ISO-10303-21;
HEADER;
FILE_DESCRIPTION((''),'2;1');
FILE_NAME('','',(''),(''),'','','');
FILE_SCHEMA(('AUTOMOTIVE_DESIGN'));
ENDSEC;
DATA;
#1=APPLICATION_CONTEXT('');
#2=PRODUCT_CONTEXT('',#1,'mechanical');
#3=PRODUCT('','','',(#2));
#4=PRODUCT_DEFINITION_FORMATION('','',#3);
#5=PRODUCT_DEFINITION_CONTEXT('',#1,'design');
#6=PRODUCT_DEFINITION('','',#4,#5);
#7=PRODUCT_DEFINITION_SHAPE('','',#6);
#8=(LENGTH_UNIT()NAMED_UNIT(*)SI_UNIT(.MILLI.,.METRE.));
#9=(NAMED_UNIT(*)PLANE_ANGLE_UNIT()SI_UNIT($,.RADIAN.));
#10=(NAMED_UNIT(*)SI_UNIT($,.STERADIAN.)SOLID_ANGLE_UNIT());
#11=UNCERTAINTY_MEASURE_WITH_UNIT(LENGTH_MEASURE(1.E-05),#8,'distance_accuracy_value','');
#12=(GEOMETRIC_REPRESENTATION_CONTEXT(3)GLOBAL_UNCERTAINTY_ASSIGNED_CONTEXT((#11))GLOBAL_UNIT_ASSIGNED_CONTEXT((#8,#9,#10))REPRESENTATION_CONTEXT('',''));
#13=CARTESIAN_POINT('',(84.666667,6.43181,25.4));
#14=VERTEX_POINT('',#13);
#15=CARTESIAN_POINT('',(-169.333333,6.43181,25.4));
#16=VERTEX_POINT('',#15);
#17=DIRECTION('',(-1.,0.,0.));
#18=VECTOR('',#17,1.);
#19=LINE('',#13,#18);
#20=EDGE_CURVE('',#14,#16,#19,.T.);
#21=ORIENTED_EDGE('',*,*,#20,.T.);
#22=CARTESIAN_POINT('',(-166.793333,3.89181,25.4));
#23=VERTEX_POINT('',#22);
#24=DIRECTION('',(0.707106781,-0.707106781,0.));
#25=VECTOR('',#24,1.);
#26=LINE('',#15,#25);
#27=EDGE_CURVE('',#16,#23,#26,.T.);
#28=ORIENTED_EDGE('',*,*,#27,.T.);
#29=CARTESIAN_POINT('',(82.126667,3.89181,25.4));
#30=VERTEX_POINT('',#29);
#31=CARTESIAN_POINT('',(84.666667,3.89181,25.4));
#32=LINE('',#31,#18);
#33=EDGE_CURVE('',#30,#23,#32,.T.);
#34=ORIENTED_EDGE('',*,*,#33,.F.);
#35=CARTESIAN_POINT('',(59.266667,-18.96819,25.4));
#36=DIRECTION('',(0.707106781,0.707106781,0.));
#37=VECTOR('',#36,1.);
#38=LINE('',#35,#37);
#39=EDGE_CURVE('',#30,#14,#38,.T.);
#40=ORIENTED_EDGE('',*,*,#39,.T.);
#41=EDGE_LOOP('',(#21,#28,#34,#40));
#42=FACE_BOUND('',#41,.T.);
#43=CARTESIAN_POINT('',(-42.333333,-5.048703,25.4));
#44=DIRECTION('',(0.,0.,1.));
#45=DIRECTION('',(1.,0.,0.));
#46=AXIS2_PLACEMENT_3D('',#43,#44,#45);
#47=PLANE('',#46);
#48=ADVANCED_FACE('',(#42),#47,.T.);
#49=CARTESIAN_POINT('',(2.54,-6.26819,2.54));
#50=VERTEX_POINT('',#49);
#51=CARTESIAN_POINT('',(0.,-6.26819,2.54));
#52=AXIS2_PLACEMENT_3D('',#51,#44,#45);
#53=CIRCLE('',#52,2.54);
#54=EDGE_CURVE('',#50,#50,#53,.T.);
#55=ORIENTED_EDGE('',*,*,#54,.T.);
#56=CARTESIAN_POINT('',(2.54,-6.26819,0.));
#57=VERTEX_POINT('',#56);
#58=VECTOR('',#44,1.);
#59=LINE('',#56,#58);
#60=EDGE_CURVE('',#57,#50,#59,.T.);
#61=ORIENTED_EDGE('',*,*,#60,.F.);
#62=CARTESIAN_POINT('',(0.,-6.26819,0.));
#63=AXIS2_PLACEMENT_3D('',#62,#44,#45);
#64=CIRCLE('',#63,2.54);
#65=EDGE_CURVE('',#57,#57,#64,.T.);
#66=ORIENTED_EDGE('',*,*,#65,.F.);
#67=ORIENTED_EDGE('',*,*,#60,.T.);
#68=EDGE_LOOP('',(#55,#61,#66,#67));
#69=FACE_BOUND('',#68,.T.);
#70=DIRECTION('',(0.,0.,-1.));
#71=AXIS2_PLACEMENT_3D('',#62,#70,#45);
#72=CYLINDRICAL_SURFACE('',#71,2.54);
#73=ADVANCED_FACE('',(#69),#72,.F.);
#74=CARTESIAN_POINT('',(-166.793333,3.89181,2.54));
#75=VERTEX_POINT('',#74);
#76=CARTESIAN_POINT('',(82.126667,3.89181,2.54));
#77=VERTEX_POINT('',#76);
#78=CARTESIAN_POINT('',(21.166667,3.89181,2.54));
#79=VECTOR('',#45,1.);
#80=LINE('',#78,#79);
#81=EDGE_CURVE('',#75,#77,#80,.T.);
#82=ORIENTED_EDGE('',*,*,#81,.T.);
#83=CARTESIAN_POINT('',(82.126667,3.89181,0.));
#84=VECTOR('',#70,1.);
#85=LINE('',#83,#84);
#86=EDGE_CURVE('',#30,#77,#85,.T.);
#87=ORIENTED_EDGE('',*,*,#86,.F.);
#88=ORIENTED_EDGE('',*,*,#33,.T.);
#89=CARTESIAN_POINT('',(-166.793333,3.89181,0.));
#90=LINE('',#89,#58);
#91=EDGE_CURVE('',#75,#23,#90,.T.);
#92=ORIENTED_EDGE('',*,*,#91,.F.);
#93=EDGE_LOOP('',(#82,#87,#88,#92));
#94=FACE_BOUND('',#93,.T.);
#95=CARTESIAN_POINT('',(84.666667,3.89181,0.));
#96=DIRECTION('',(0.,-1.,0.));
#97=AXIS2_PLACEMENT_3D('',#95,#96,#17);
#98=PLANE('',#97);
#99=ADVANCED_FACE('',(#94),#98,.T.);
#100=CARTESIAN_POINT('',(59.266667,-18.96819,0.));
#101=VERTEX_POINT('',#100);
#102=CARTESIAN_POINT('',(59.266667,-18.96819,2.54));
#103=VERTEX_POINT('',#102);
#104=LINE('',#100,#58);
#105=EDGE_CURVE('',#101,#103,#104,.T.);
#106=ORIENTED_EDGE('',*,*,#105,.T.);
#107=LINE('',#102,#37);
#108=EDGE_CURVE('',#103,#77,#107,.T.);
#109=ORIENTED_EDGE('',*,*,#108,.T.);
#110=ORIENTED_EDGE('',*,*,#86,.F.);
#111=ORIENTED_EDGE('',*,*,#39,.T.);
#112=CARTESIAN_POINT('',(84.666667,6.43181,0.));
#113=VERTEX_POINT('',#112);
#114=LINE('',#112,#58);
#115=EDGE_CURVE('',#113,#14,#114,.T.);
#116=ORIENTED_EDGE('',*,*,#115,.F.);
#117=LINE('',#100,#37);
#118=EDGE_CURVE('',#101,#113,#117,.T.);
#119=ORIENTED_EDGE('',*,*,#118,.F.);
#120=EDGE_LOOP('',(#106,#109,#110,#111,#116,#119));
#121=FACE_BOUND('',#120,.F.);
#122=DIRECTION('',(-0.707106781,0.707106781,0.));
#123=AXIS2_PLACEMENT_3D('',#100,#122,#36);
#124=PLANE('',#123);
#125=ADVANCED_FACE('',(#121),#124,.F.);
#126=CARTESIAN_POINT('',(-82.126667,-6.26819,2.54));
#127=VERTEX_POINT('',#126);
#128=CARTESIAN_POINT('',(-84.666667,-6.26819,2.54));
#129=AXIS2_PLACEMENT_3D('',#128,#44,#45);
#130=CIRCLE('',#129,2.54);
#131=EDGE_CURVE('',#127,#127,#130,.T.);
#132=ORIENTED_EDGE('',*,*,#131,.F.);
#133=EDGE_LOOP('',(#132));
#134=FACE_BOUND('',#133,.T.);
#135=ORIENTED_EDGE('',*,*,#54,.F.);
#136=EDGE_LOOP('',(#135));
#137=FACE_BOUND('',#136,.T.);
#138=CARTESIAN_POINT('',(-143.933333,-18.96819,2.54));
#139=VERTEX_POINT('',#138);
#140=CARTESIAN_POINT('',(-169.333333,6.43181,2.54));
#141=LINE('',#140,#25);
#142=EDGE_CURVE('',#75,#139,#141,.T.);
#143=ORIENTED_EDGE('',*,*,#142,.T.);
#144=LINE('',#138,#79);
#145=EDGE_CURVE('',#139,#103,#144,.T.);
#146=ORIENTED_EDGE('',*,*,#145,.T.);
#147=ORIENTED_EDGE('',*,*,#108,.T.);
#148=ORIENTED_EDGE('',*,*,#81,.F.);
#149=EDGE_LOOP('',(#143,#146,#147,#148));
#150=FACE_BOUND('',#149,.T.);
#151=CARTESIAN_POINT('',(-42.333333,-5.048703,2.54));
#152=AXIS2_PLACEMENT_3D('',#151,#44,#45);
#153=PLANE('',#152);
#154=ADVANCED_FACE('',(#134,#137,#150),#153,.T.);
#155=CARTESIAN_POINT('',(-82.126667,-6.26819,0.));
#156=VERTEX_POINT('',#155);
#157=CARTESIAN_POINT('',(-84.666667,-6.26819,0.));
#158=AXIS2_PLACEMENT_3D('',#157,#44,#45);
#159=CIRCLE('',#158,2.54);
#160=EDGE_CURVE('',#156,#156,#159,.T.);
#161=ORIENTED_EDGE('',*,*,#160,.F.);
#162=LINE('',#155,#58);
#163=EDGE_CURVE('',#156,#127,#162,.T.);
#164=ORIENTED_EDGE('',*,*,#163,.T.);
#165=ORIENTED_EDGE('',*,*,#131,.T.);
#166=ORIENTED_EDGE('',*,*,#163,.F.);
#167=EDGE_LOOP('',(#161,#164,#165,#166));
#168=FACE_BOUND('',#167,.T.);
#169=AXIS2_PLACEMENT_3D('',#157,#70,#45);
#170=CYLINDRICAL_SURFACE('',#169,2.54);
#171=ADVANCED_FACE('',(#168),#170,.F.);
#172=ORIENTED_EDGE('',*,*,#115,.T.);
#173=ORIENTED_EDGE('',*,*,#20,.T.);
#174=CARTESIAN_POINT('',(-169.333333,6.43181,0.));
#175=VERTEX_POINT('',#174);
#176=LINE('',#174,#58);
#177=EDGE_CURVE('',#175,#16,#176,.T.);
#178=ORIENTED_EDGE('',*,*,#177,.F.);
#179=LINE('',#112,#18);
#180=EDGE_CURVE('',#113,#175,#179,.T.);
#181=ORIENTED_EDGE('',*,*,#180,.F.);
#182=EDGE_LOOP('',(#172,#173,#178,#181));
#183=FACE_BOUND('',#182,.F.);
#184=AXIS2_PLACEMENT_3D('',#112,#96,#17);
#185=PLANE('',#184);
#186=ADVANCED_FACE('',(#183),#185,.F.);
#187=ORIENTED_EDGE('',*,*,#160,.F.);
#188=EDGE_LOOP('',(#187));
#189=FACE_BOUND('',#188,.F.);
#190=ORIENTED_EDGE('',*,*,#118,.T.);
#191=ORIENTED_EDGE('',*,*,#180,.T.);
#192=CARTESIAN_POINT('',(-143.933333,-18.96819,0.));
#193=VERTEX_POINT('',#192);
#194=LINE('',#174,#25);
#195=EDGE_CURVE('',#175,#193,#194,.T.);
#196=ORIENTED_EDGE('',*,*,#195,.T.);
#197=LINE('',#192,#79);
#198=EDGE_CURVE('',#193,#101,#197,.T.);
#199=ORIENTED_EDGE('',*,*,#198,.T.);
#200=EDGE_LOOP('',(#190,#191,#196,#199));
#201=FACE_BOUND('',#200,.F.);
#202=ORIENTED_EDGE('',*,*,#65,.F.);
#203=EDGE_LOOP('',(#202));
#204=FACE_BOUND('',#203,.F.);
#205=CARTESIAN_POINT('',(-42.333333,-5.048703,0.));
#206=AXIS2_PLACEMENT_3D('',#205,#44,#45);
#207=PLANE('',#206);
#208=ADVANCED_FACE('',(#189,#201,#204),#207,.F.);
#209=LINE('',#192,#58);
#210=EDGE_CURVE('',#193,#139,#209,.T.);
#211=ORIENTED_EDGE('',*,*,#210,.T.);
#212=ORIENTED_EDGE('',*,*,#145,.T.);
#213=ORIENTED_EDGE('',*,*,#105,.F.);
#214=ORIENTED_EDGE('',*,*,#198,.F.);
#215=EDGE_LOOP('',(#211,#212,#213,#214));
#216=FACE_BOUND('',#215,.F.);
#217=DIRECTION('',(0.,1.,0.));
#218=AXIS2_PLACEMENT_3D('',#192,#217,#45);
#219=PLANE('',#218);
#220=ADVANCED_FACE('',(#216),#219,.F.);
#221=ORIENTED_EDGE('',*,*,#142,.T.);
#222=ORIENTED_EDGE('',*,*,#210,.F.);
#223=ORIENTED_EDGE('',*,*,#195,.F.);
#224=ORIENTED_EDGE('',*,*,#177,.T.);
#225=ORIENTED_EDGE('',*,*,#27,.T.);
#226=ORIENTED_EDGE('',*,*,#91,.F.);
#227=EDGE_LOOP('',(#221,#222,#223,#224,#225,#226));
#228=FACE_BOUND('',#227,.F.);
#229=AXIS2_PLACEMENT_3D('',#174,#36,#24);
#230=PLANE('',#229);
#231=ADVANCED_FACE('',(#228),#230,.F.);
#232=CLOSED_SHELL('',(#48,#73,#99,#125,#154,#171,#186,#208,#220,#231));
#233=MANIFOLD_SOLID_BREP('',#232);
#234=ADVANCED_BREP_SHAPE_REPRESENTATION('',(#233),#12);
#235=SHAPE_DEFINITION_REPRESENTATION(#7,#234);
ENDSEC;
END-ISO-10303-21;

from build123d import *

# Parameters (mm, degrees)
F0_R     = 2.54
F1_DEPTH = 25.4
F2_T     = -2.54


# Not quite as in the source:
# - a feature names something its author has since deleted; it is built from what else it names


with BuildPart() as f1:
    # F0 (on Top) → F1 (new body)
    with BuildSketch(Plane.XY):
        Polygon((84.6666666667, 6.4318103081), (-169.3333333333, 6.4318103081), (-143.9333333333, -18.9681896919), (59.2666666667, -18.9681896919), align=None)
        with Locations((-84.6666666667, -6.2681896919)):
            Circle(F0_R, mode=Mode.SUBTRACT)
        with Locations((0, -6.2681896919)):
            Circle(F0_R, mode=Mode.SUBTRACT)
    extrude(amount=F1_DEPTH)

    # F2
    f2_openings = [f1.faces().sort_by_distance(p)[0] for p in [
        (71.966667, -6.26819, 12.7),
        (-156.633333, -6.26819, 12.7),
        (-42.333333, -18.96819, 12.7),
        (-42.333333, -5.794512, 25.4),
        (-87.206667, -6.26819, 12.7),
        (-2.54, -6.26819, 12.7),
    ]]
    offset(amount=F2_T, openings=f2_openings)


solid = f1.part
